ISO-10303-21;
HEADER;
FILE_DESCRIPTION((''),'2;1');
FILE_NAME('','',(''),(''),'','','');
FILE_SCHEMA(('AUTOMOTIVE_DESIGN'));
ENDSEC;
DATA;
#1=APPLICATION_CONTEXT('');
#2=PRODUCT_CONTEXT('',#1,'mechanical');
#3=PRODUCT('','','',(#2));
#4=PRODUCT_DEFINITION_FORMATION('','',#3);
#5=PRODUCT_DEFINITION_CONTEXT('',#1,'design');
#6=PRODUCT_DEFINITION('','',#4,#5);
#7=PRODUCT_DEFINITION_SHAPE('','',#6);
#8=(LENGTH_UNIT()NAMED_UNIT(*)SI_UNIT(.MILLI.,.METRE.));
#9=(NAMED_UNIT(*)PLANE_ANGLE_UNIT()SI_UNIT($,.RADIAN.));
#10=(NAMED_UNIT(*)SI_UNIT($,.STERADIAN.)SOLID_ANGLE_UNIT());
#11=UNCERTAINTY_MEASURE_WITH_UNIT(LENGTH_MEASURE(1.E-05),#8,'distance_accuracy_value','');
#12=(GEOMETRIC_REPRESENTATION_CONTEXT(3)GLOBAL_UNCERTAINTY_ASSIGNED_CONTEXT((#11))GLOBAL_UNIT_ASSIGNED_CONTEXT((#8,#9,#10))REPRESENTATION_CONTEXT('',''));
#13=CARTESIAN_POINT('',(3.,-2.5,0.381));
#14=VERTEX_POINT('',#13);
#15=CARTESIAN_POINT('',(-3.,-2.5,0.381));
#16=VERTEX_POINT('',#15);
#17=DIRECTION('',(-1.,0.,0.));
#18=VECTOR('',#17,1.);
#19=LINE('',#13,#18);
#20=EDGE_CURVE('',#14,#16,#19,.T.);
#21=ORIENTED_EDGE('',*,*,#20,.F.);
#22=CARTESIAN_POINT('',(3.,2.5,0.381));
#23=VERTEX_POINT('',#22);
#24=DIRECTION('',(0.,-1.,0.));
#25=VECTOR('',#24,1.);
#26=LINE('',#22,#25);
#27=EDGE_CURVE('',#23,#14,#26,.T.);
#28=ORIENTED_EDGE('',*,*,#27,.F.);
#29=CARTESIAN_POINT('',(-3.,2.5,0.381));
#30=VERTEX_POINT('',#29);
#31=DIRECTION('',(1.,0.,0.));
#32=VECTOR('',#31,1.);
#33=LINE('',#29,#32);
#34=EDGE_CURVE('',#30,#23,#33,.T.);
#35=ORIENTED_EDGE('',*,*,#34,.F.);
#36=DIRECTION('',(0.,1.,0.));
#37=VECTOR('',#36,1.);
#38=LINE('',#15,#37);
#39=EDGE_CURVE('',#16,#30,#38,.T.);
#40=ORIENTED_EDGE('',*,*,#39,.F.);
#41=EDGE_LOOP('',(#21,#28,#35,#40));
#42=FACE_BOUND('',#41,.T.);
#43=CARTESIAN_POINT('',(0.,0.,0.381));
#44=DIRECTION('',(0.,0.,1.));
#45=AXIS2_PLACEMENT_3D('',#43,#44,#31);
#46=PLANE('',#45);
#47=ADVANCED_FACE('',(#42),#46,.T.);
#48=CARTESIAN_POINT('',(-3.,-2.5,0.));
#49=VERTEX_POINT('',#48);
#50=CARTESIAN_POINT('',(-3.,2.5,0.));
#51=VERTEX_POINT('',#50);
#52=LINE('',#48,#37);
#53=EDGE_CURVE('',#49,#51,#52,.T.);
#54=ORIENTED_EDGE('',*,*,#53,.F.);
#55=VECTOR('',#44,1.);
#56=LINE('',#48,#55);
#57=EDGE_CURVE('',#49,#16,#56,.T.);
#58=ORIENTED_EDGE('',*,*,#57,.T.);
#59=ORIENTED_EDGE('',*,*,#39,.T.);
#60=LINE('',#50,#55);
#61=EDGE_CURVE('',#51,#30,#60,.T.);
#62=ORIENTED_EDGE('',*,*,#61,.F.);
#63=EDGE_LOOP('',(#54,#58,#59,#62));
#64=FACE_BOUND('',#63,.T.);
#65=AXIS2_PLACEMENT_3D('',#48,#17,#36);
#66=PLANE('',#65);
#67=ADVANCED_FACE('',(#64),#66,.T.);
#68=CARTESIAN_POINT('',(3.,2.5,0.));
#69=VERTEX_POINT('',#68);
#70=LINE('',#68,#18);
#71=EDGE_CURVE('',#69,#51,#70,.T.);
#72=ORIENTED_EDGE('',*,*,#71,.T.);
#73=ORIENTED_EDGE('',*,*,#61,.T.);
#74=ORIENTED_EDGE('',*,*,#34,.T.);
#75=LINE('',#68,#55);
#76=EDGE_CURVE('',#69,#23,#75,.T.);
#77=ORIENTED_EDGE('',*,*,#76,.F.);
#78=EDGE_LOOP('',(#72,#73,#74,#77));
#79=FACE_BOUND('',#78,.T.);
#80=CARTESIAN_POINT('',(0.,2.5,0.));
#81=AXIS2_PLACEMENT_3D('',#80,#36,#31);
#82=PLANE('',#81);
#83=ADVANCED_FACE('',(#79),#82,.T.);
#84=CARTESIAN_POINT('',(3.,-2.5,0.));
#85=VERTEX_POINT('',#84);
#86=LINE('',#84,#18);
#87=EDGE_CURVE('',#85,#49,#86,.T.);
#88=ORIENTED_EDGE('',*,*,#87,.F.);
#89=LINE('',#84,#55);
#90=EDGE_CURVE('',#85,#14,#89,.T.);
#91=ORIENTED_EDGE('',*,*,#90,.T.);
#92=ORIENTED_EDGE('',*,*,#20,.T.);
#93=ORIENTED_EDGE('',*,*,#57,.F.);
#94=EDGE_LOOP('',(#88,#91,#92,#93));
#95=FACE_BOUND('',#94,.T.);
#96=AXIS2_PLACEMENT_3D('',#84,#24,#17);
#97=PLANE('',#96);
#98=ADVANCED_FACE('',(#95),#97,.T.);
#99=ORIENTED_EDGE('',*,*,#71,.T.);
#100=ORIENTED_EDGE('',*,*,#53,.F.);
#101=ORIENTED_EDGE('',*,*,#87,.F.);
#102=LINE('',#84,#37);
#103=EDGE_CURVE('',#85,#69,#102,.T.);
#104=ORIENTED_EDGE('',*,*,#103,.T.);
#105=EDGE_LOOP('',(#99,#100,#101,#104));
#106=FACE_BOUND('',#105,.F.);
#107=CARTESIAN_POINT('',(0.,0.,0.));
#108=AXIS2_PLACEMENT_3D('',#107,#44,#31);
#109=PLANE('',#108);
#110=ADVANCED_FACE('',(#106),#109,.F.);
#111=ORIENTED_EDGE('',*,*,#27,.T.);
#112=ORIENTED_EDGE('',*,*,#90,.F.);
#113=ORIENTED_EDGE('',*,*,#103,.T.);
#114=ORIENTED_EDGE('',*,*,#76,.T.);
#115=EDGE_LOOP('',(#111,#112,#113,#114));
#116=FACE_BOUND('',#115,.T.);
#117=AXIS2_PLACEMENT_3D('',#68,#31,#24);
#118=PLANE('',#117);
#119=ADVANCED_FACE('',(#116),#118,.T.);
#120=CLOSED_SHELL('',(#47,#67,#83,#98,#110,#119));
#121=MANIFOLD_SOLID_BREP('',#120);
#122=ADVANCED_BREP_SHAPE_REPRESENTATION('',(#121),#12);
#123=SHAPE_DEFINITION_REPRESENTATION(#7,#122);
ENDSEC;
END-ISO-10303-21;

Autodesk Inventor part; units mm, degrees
ref_plane "YZ Plane" through (0, 0, 0) normal (1, 0, 0) x (0, 1, 0)
ref_plane "XZ Plane" through (0, 0, 0) normal (0, 1, 0) x (-1, 0, 0)
ref_plane "XY Plane" through (0, 0, 0) normal (0, 0, 1) x (1, 0, 0)
sketch "Sketch1" plane through (0, 0, 0) normal (0, 0, 1) x (1, 0, 0)
  line L0 (0, 5.6198) -> (0, 0)
  line L1 (0, 0) -> (7.2459, 0)
  line L2 (-3, 2.5) -> (3, 2.5)
  line L3 (3, 2.5) -> (3, -2.5)
  line L4 (3, -2.5) -> (-3, -2.5)
  line L5 (-3, -2.5) -> (-3, 2.5)
  dimension "d0" = 6
  dimension "d1" = 5
extrude "Plate1" add sketch "Sketch1" along normal blind 0.381
equation "\"BendRadius\" = Thickness"
equation "\"BendReliefWidth\" = Thickness"
equation "\"BendReliefDepth\" = 0.5 * Thickness"
equation "\"CornerReliefSize\" = 4 * Thickness"
equation "\"MinimumRemnant\" = 2 * Thickness"
equation "\"TransitionRadius\" = BendRadius"
equation "\"JacobiRadiusSize\" = BendRadius"
equation "\"GapSize\" = Thickness"
equation "\"d2\" = BendRadius"
equation "\"Thickness\" = 0.381"
properties part number "RX_Shim"
